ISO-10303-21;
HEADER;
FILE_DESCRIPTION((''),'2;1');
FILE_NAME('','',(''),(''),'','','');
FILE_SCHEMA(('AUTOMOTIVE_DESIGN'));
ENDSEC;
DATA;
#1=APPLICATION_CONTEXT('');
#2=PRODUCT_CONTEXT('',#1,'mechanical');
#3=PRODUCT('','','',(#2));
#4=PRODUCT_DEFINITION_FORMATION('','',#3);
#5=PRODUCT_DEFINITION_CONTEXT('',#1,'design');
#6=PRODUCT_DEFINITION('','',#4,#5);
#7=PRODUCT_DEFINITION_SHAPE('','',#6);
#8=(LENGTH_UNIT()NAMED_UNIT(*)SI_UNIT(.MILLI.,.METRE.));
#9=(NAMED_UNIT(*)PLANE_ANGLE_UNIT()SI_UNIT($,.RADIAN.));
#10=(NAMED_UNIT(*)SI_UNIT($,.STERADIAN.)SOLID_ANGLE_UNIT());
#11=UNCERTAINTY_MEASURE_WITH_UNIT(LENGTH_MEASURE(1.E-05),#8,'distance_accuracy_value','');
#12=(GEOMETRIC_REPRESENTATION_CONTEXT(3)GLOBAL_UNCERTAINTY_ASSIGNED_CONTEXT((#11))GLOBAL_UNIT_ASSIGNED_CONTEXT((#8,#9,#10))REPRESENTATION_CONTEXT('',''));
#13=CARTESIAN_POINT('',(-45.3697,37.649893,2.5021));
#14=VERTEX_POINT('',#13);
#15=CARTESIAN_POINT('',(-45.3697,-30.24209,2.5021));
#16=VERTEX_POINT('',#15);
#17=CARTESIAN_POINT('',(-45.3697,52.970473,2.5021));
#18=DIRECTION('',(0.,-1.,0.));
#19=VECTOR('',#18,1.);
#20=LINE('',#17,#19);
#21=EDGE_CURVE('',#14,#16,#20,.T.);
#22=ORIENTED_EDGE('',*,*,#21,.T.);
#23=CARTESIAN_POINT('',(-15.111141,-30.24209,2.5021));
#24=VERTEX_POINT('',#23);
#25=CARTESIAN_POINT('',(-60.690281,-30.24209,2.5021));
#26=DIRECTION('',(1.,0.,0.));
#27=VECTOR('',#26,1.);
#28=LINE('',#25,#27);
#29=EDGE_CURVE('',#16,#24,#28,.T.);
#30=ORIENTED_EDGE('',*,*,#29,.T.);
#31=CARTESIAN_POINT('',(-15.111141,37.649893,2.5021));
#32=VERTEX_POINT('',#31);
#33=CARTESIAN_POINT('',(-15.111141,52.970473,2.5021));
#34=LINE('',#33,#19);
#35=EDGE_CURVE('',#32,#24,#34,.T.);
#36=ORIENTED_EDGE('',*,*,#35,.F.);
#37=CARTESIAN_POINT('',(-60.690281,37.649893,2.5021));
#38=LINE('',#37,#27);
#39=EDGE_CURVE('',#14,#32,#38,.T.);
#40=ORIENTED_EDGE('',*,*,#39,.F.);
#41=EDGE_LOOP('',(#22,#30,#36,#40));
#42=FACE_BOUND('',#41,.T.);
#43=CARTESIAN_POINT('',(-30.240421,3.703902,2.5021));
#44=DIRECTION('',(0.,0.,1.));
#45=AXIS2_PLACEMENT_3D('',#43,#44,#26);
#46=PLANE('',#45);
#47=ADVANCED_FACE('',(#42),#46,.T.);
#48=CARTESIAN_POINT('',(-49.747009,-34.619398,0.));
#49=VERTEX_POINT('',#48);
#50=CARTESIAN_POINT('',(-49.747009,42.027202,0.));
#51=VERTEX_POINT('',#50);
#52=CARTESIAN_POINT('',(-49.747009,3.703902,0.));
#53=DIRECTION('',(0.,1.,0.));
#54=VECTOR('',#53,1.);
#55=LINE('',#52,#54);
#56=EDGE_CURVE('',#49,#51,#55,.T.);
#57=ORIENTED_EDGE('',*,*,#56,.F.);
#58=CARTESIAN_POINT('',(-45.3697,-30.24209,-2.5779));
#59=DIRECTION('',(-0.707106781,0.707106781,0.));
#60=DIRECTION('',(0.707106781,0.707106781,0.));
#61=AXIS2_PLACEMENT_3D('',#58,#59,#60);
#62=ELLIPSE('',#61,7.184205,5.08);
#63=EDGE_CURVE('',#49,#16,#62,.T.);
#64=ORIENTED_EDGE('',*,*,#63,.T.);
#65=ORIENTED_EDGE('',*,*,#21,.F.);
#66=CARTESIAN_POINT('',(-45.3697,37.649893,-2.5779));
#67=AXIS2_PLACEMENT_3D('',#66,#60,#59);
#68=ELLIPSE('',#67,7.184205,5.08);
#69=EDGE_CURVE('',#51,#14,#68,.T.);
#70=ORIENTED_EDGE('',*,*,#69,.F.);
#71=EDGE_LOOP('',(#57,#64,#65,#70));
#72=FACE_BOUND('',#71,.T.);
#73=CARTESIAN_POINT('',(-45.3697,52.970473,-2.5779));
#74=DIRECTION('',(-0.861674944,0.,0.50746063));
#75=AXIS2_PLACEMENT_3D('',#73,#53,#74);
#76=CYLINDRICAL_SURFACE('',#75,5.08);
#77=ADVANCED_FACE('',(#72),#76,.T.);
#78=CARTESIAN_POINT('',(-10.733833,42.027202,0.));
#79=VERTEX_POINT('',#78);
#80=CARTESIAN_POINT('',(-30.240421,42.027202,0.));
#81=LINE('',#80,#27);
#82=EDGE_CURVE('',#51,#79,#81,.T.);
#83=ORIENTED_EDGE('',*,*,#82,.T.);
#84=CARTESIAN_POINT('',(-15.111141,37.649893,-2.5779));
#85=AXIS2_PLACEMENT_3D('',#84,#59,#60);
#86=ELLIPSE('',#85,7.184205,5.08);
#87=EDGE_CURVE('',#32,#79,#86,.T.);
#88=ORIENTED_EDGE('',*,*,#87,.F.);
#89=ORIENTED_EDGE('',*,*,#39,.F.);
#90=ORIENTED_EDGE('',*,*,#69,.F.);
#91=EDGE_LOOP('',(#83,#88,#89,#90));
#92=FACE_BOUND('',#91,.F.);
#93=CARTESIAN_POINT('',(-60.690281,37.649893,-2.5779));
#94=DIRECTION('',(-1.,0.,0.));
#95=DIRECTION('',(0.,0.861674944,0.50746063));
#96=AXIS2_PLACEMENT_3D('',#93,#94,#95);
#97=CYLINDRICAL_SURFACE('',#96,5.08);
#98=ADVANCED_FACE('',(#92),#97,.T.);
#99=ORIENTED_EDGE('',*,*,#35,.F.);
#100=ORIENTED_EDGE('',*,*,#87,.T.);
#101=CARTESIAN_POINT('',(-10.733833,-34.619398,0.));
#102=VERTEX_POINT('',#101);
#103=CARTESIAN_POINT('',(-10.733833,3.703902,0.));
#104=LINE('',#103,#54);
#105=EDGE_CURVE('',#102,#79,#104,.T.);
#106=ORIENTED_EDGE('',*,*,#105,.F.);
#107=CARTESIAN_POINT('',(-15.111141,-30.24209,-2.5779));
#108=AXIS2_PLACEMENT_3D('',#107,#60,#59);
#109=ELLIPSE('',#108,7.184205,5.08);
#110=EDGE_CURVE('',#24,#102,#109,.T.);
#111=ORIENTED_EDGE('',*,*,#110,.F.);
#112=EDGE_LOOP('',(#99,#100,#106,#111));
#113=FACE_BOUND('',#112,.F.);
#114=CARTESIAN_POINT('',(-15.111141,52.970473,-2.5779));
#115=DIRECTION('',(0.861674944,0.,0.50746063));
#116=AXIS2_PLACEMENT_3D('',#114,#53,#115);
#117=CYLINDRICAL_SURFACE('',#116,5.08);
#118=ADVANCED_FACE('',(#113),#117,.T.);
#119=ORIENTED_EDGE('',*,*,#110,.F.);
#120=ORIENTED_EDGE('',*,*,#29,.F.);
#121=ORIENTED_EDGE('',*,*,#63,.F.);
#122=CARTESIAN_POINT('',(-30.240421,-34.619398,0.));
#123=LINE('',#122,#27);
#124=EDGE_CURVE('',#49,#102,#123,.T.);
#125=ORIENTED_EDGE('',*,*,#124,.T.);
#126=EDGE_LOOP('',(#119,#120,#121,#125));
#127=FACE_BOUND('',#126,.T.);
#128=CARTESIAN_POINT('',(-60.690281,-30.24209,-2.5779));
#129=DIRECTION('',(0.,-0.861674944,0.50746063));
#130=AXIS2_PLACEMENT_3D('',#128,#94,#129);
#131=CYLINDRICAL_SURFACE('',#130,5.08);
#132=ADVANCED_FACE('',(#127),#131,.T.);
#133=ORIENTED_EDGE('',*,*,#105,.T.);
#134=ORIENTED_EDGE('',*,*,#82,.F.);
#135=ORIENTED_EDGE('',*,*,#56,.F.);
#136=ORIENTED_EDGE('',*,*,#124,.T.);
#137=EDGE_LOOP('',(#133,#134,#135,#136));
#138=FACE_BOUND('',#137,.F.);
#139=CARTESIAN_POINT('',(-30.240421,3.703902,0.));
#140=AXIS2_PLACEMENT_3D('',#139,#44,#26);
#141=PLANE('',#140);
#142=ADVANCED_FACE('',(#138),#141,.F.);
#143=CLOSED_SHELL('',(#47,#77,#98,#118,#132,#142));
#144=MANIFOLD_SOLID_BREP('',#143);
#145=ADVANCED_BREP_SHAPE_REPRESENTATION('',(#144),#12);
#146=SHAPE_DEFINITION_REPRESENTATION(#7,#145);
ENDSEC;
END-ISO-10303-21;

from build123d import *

# Parameters (mm, degrees)
F0_W        = 39.0131762251
F0_H        = 76.6465999186
F1_DEPTH    = 2.5021
F2_T1_DEPTH = 98.5331434957
F2_T3_DEPTH = 60.8997198022


# Not quite as in the source:
# - a fillet or chamfer that OpenCascade refuses, or shapes differently, is made with other operations: its cross-section is extruded or revolved along the edge and cut away or added


with BuildPart() as f1:
    # F0 (on Top) → F1 (new body)
    with BuildSketch(Plane.XY):
        with Locations((-30.2404207177, 3.7039015442)):
            Rectangle(F0_W, F0_H)
    extrude(amount=F1_DEPTH)

    # F2: fillet of radius 5.08 on 4 edges, made by hand

    # F2_s2 → F2_t1 (cut)
    with BuildSketch(Plane.XZ.offset(-52.970473292)):
        with BuildLine():
            ThreePointArc((-10.7338326052, 0), (-12.5901625424, 1.8324362684), (-15.1111413206, 2.5021))
            Line((-15.1111413206, 2.5021), (-10.7338326052, 2.5021))
            Line((-10.7338326052, 2.5021), (-10.7338326052, 0))
        make_face()
        with BuildLine():
            ThreePointArc((-49.7470088303, 0), (-47.8906788931, 1.8324362684), (-45.3697001149, 2.5021))
            Line((-45.3697001149, 2.5021), (-49.7470088303, 2.5021))
            Line((-49.7470088303, 2.5021), (-49.7470088303, 0))
        make_face()
    extrude(amount=F2_T1_DEPTH, mode=Mode.SUBTRACT)

    # F2_s4 → F2_t3 (cut)
    with BuildSketch(Plane.YZ.offset(-60.6902806188)):
        with BuildLine():
            ThreePointArc((-34.6193984151, 0), (-32.7630684779, 1.8324362684), (-30.2420896997, 2.5021))
            Line((-30.2420896997, 2.5021), (-34.6193984151, 2.5021))
            Line((-34.6193984151, 2.5021), (-34.6193984151, 0))
        make_face()
        with BuildLine():
            ThreePointArc((42.0272015035, 0), (40.1708715663, 1.8324362684), (37.6498927881, 2.5021))
            Line((37.6498927881, 2.5021), (42.0272015035, 2.5021))
            Line((42.0272015035, 2.5021), (42.0272015035, 0))
        make_face()
    extrude(amount=F2_T3_DEPTH, mode=Mode.SUBTRACT)


solid = f1.part
